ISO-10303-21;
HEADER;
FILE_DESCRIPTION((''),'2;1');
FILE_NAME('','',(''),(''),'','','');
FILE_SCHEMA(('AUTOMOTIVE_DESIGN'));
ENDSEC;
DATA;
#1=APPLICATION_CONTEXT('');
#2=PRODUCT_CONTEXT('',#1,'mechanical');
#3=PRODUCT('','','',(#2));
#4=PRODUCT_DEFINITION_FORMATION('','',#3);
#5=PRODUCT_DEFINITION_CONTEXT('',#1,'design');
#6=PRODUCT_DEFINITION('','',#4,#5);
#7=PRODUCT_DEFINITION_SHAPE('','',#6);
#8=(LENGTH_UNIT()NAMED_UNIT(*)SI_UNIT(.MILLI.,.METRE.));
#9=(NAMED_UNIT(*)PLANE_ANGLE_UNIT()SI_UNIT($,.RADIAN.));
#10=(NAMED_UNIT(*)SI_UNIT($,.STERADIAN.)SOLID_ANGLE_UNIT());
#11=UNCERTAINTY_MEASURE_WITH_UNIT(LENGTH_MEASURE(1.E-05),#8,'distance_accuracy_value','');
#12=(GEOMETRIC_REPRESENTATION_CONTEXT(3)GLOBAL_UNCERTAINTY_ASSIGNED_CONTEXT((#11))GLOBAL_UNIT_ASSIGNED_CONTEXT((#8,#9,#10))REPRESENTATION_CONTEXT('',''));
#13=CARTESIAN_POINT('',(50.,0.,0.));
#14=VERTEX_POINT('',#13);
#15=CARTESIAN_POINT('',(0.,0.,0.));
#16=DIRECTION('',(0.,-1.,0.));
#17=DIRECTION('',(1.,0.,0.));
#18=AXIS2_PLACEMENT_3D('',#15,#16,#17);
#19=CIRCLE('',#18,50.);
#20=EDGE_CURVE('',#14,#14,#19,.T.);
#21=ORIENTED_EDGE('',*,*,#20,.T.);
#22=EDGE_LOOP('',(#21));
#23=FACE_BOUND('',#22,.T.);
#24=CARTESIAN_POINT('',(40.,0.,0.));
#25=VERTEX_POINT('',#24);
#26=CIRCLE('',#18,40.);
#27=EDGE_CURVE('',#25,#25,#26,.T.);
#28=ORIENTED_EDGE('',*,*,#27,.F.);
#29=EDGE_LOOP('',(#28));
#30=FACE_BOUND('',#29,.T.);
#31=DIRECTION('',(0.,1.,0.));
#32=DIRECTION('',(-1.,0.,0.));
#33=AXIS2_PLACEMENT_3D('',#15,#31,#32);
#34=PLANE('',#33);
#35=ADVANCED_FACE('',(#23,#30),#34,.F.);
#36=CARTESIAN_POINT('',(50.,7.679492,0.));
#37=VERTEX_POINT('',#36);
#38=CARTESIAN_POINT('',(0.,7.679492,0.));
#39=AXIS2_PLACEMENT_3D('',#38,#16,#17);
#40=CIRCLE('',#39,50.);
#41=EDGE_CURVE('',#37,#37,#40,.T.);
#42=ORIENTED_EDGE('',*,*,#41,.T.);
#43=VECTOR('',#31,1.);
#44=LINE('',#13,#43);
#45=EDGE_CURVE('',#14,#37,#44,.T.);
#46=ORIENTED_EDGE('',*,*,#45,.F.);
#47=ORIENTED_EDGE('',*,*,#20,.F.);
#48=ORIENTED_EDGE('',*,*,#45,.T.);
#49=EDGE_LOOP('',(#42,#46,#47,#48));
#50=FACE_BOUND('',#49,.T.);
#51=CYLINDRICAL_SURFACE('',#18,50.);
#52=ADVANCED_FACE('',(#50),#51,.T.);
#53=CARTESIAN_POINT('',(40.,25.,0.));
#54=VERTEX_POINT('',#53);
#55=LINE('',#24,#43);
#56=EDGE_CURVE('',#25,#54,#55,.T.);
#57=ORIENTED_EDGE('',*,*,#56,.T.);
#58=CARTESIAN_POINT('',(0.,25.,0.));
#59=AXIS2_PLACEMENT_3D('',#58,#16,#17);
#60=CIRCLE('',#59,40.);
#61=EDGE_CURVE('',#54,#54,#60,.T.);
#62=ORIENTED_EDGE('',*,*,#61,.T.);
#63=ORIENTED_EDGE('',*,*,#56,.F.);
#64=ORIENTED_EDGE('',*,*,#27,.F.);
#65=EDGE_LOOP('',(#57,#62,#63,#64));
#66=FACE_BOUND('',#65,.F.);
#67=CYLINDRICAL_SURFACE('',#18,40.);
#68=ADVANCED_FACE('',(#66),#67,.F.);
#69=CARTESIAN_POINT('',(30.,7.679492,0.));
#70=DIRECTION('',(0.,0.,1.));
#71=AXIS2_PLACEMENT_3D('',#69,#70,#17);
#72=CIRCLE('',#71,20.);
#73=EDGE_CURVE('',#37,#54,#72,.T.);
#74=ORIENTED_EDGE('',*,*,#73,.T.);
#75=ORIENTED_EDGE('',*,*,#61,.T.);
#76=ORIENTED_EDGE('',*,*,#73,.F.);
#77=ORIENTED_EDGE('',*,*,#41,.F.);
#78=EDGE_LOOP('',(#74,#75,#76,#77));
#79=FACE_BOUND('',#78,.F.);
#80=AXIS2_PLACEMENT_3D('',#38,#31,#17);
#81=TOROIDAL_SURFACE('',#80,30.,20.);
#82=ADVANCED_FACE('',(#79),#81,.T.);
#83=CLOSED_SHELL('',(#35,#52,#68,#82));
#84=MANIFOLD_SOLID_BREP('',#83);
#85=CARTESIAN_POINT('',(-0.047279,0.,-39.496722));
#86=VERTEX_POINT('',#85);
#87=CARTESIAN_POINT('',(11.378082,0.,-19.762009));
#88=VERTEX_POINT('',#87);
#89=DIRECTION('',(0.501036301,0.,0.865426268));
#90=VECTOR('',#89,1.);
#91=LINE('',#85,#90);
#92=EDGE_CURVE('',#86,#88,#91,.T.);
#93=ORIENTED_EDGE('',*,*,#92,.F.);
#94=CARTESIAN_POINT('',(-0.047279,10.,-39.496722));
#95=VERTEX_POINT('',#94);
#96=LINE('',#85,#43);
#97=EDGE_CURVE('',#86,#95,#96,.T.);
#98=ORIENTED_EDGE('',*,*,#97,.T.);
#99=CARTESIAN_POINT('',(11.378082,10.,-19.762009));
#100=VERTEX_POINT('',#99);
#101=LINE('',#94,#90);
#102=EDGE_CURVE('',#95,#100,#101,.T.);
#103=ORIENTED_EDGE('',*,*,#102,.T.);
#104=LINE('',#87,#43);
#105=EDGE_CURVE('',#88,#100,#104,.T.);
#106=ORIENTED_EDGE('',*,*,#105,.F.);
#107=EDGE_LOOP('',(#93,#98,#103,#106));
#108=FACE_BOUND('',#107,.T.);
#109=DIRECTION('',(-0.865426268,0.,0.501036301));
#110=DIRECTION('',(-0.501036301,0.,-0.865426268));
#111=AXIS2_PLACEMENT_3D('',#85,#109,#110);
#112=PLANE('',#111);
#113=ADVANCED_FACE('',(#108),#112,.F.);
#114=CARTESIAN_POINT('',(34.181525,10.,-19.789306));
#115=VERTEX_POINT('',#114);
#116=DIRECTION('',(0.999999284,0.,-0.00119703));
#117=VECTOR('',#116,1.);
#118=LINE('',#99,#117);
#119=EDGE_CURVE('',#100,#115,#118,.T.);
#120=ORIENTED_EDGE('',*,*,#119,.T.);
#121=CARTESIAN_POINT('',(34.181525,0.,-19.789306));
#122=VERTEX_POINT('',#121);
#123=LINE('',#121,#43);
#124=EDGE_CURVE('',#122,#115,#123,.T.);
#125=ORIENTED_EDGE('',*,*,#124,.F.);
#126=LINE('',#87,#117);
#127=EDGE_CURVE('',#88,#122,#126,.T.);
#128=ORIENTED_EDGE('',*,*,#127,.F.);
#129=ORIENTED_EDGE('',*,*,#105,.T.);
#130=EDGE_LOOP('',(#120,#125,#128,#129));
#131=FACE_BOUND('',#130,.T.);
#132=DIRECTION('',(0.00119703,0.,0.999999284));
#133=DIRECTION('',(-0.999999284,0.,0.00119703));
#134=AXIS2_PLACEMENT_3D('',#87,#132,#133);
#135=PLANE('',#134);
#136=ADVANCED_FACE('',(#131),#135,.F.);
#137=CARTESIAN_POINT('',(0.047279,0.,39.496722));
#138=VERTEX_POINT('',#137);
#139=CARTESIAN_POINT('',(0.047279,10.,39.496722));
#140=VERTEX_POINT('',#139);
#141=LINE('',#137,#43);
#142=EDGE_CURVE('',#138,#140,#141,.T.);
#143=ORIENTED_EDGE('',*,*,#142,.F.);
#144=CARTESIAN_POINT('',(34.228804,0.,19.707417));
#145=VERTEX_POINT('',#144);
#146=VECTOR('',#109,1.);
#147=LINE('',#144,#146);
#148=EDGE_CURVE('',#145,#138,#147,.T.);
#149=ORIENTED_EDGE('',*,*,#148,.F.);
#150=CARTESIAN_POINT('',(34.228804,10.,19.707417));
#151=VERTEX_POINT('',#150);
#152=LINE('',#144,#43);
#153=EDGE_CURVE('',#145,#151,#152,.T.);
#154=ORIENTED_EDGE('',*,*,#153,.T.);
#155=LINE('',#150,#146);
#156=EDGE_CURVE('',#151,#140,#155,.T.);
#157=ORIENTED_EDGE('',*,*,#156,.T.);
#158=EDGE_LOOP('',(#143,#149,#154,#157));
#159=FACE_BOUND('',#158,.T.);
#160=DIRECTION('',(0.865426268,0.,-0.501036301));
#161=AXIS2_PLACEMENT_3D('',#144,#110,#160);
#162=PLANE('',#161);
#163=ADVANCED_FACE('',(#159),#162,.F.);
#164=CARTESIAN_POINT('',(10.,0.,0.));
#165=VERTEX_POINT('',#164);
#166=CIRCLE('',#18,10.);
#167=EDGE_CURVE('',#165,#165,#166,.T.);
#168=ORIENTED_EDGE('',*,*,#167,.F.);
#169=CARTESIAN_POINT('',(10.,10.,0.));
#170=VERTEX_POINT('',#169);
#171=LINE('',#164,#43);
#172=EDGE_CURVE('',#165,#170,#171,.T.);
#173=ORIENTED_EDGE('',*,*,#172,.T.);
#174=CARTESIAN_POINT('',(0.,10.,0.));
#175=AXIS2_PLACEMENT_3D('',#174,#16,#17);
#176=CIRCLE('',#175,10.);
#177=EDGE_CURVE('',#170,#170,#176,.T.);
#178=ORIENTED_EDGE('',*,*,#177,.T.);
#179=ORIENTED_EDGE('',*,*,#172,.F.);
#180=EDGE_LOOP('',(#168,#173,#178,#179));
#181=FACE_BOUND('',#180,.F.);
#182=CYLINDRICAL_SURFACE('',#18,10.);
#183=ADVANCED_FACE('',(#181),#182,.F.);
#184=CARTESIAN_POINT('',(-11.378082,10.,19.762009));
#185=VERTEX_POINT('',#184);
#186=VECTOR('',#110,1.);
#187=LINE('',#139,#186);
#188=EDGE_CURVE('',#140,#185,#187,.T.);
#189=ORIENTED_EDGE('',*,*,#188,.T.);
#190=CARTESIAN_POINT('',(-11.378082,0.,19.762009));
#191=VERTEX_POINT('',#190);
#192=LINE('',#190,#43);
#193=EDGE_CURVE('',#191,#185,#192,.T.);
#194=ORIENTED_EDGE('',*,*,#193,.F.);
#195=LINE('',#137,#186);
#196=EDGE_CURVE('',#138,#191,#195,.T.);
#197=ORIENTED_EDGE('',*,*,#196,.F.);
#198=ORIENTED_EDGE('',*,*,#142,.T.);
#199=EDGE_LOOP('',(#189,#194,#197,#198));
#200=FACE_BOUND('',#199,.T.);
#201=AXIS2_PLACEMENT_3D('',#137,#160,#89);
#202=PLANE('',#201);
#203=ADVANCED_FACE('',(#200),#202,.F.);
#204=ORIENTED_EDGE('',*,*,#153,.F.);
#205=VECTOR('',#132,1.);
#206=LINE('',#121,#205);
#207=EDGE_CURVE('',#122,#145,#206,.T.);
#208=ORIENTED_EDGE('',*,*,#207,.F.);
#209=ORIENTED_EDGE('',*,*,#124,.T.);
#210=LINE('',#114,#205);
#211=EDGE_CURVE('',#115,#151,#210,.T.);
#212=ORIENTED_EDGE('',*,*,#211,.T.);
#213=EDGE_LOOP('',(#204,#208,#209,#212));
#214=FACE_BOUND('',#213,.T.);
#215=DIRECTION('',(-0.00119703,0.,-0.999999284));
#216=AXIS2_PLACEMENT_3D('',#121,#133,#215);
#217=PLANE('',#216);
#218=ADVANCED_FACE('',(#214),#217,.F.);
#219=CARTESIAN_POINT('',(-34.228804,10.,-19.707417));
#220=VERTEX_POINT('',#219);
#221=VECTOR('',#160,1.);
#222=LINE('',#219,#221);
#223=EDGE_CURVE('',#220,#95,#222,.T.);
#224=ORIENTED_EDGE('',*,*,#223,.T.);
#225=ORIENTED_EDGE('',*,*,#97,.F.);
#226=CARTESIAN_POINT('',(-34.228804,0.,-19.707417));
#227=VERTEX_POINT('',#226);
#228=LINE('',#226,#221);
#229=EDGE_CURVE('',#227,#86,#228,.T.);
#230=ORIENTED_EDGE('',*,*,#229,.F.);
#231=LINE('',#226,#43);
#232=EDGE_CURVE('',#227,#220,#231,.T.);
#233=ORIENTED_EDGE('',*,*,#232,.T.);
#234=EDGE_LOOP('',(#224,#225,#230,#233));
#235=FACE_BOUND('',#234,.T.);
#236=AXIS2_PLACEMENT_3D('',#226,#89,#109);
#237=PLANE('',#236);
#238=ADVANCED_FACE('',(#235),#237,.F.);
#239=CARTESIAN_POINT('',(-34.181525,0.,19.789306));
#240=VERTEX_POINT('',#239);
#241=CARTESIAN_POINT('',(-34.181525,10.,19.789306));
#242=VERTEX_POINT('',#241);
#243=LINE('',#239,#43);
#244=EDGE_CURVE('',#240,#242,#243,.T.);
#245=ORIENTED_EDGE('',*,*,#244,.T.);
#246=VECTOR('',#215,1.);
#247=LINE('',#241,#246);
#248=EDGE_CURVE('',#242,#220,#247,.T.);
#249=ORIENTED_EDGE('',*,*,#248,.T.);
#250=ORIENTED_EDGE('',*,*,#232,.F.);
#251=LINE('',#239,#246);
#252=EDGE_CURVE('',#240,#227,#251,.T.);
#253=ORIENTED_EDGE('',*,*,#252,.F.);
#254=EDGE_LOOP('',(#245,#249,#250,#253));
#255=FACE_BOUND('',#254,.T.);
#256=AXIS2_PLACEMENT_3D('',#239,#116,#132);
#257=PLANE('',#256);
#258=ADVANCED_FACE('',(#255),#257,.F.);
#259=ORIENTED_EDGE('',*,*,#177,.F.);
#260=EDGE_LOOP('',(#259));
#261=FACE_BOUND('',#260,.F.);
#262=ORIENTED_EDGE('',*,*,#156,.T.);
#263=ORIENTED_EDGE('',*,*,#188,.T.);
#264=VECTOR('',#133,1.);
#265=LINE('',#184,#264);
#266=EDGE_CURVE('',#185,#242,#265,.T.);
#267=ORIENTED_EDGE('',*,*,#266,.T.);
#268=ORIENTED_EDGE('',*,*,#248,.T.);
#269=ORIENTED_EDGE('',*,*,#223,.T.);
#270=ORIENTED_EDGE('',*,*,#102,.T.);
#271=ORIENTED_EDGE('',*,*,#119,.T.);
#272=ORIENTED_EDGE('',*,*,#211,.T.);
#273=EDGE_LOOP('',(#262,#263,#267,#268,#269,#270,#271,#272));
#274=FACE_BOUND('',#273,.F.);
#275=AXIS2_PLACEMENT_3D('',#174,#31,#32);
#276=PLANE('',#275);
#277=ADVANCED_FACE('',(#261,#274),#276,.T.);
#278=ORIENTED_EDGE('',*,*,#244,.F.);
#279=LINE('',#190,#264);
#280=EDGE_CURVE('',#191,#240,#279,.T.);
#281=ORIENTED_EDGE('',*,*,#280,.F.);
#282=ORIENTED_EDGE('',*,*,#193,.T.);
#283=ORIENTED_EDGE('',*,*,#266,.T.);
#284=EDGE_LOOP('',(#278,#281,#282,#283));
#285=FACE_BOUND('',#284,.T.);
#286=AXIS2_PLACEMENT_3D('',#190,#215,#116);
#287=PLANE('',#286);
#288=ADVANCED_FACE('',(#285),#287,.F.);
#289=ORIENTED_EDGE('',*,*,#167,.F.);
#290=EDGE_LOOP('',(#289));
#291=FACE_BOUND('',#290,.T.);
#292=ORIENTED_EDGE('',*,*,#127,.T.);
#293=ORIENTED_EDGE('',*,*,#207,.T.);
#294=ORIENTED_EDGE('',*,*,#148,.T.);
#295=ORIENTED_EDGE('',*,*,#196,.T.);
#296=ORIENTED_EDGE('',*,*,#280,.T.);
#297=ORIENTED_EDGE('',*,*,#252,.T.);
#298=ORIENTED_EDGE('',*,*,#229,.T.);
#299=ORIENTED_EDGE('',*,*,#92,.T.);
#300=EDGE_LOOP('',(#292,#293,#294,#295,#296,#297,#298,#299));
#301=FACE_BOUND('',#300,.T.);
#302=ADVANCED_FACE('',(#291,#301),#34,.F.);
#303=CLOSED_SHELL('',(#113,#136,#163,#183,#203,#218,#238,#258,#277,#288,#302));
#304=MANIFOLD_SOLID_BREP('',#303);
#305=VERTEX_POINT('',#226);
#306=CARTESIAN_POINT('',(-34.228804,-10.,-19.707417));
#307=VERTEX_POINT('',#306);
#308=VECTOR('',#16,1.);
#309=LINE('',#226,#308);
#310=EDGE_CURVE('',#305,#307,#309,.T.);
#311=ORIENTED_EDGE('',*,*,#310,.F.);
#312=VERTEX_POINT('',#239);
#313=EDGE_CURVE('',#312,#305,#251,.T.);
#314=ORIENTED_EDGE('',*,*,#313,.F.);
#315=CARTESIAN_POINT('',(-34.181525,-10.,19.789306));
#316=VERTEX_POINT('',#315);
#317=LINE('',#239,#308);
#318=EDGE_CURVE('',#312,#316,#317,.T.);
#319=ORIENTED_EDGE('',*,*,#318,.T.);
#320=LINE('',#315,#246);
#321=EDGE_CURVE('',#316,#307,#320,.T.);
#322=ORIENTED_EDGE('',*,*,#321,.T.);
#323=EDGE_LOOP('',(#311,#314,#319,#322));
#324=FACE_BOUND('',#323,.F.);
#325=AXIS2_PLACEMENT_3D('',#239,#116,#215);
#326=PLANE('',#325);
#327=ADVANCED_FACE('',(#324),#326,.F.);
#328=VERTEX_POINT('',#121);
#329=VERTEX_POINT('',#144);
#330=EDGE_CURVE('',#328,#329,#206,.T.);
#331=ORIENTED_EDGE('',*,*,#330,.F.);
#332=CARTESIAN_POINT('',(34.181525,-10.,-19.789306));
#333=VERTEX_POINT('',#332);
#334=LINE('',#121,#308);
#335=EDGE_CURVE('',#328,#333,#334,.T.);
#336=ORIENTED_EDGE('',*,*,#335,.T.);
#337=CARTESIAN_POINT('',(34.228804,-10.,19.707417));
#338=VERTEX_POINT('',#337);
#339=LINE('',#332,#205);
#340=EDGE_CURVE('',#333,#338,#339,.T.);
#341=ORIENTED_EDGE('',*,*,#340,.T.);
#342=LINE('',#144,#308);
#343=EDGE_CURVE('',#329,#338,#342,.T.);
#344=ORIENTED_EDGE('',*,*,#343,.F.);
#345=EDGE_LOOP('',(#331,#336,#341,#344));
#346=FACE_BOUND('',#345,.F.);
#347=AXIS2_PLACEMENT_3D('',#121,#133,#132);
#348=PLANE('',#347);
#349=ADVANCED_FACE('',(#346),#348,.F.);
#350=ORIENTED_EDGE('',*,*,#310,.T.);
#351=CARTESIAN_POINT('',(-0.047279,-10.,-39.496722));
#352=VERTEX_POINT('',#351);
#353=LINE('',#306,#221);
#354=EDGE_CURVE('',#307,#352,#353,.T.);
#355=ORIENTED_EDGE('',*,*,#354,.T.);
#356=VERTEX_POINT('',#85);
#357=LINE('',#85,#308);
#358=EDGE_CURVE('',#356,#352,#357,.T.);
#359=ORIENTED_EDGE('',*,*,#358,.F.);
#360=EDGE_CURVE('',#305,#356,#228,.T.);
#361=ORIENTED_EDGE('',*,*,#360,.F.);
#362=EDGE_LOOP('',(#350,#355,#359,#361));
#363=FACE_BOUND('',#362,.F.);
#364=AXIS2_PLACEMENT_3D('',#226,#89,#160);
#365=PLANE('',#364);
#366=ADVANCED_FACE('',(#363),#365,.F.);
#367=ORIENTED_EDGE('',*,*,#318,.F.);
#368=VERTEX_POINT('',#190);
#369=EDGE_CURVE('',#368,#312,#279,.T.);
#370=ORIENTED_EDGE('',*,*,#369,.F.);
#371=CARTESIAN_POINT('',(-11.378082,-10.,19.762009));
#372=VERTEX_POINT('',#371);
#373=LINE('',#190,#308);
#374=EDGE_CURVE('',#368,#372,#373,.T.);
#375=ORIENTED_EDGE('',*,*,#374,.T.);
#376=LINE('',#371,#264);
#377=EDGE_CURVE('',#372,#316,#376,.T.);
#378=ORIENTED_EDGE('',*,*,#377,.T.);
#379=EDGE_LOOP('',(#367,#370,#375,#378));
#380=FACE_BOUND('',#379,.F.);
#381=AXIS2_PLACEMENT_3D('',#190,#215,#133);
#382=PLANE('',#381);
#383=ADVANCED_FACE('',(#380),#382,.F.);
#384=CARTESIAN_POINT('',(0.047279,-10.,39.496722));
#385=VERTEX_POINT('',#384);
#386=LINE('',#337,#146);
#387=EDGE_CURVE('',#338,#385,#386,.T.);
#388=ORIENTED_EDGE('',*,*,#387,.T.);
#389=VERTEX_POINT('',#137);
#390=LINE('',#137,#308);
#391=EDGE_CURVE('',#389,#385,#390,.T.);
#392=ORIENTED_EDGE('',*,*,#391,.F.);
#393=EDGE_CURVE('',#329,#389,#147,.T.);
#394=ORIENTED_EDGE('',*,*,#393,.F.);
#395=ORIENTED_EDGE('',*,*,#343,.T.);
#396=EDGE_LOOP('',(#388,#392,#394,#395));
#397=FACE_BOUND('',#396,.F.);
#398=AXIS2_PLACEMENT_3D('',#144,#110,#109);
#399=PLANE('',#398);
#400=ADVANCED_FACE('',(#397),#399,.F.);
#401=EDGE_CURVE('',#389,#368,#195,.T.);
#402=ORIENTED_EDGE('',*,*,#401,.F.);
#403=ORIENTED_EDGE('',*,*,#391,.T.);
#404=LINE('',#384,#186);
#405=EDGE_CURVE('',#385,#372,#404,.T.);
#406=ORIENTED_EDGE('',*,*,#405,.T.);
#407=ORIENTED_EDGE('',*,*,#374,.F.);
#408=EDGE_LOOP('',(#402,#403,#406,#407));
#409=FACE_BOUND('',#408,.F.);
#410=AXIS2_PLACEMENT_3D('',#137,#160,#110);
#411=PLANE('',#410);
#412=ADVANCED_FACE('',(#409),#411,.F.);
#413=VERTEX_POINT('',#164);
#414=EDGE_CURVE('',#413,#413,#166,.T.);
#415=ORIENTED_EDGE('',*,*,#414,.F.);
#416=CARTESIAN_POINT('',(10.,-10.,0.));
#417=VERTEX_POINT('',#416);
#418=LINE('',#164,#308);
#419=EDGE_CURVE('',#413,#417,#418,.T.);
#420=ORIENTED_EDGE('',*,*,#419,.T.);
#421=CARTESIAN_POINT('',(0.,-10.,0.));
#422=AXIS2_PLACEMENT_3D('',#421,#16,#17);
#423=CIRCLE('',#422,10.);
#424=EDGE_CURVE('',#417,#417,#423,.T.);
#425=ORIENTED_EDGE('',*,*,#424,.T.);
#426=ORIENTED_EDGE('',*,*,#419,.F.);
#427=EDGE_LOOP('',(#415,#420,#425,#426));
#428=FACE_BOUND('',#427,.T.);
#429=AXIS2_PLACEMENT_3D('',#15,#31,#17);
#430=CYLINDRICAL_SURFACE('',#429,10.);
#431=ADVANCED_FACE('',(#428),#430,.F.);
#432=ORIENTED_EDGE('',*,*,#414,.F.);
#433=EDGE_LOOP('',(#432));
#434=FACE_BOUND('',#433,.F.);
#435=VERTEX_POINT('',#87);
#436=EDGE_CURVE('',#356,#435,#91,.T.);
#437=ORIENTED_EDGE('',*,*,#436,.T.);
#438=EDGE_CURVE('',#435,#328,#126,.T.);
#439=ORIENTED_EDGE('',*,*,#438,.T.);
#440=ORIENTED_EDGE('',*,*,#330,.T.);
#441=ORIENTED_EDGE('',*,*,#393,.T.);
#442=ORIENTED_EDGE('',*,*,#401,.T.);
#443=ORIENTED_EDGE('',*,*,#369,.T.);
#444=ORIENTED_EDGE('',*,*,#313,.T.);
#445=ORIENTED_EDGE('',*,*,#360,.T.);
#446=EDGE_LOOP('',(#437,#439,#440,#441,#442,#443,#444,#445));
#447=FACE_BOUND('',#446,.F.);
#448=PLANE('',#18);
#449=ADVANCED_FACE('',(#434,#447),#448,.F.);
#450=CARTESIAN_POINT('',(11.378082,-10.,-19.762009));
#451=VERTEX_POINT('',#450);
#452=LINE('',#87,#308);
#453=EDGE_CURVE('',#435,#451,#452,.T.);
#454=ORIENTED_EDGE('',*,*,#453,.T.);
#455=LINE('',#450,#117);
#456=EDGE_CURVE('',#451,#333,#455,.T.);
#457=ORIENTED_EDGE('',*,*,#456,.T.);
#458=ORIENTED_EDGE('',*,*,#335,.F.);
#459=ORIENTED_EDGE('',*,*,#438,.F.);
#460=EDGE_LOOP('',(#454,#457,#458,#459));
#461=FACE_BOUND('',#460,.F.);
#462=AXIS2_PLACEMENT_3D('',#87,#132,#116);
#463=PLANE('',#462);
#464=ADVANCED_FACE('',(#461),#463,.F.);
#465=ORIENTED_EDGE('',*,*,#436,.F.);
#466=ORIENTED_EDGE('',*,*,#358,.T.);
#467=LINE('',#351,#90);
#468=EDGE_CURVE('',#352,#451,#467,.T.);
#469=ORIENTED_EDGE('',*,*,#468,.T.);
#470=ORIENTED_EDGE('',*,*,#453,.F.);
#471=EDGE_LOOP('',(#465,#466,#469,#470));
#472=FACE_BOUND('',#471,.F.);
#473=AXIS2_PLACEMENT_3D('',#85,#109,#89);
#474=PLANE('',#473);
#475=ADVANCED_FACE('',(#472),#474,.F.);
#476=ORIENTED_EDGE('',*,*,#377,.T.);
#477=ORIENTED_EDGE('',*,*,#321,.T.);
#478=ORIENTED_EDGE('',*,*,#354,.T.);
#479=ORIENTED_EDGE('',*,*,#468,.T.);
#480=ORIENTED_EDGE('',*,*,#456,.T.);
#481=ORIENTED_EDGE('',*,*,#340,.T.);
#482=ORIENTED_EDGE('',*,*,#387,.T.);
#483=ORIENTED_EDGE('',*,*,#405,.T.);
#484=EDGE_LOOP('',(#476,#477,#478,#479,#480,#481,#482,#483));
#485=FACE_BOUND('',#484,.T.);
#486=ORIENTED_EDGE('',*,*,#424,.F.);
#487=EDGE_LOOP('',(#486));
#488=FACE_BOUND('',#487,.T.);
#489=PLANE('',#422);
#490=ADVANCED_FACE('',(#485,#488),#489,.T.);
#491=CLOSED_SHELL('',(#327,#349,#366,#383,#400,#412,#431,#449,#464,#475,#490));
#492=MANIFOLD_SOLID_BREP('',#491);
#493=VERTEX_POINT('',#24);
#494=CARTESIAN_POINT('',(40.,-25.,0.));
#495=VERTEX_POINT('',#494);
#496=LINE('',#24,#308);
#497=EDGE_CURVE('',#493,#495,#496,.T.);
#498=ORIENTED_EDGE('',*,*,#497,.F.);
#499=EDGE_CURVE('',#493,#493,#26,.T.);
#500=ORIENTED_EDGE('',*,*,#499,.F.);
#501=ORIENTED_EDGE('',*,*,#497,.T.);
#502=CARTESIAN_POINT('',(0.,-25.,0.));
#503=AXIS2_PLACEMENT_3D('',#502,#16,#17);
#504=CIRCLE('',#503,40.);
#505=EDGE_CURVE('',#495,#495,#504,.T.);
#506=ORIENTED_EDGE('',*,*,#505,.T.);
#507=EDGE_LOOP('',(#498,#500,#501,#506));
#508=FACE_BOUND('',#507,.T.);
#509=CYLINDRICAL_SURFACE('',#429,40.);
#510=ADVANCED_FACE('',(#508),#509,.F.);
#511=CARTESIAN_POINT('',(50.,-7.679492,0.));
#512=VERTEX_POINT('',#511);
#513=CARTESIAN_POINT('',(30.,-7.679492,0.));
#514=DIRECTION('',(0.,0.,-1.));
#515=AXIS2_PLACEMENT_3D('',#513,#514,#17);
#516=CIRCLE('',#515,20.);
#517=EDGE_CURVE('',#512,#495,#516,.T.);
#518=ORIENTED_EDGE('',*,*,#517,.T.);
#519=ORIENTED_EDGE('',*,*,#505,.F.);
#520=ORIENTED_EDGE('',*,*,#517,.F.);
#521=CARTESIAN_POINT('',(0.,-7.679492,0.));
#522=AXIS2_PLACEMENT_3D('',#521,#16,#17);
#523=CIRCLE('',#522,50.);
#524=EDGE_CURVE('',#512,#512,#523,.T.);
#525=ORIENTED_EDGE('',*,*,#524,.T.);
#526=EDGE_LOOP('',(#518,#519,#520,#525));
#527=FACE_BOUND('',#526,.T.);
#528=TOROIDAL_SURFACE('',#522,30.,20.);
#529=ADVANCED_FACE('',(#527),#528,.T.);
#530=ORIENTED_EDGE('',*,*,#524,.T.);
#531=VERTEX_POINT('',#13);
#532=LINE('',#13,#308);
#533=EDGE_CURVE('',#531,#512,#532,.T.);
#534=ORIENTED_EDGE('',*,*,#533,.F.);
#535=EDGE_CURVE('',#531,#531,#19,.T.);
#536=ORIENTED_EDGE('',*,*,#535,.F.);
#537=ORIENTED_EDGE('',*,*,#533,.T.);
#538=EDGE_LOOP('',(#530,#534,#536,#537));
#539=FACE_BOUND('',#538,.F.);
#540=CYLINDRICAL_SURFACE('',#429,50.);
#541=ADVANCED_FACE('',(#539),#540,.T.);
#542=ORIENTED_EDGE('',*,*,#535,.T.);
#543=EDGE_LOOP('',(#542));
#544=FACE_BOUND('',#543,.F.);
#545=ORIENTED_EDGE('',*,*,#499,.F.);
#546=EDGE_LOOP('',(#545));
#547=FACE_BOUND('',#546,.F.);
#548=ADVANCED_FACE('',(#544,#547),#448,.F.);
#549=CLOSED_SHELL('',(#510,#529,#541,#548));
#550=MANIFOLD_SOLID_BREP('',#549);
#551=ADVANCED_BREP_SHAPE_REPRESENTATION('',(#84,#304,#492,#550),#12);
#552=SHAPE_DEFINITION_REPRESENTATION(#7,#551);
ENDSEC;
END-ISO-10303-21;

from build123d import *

# Parameters (mm, degrees)
F0_R     = 10
F1_DEPTH = 10
F0_R_2   = 50
F0_R_3   = 40
F2_DEPTH = 25


# Not quite as in the source:
# - a fillet or chamfer that OpenCascade refuses, or shapes differently, is made with other operations: its cross-section is extruded or revolved along the edge and cut away or added


with BuildPart() as f1:
    # F0 (on Front) → F1 (new body)
    with BuildSketch(Plane.XZ):
        Polygon((34.228804297, 19.707416502), (0.0472788148, 39.4967223134), (-11.3780822225, 19.7620093749), (-34.1815254822, 19.7893058113), (-34.228804297, -19.707416502), (-0.0472788148, -39.4967223134), (11.3780822225, -19.7620093749), (34.1815254822, -19.7893058113), align=None)
        Circle(F0_R, mode=Mode.SUBTRACT)
    extrude(amount=F1_DEPTH)


with BuildPart() as f2:
    # F0 (on Front) → F2 (new body)
    with BuildSketch(Plane.XZ):
        Circle(F0_R_2)
        Circle(F0_R_3, mode=Mode.SUBTRACT)
    extrude(amount=F2_DEPTH)


with BuildPart() as f3_1:
    # F3: instance of F2
    add(f2.part.mirror(Plane.XZ))

    # F4#2: fillet of radius 20 on 1 edges, made by hand

    # F4_2_s1 → F4_2_t2 (revolve, cut)
    with BuildSketch(Plane.XY):
        with BuildLine():
            ThreePointArc((50, 7.6794919243), (47.3205080757, 17.6794919243), (40, 25))
            Line((40, 25), (50, 25))
            Line((50, 25), (50, 7.6794919243))
        make_face()
    revolve(axis=Axis((0, 25, 0), (0, -1, 0)), mode=Mode.SUBTRACT)


with BuildPart() as f3_2:
    # F3: instance of F1
    add(f1.part.mirror(Plane.XZ))


with BuildPart() as f2_1:
    add(f2.part)

    # F4: fillet of radius 20 on 1 edges, made by hand

    # F4_s1 → F4_t2 (revolve, cut)
    with BuildSketch(Plane.XY):
        with BuildLine():
            ThreePointArc((50, -7.6794919243), (47.3205080757, -17.6794919243), (40, -25))
            Line((40, -25), (50, -25))
            Line((50, -25), (50, -7.6794919243))
        make_face()
    revolve(axis=Axis((0, -25, 0), (0, -1, 0)), mode=Mode.SUBTRACT)


solid = Compound([f1.part, f3_1.part, f3_2.part, f2_1.part])
